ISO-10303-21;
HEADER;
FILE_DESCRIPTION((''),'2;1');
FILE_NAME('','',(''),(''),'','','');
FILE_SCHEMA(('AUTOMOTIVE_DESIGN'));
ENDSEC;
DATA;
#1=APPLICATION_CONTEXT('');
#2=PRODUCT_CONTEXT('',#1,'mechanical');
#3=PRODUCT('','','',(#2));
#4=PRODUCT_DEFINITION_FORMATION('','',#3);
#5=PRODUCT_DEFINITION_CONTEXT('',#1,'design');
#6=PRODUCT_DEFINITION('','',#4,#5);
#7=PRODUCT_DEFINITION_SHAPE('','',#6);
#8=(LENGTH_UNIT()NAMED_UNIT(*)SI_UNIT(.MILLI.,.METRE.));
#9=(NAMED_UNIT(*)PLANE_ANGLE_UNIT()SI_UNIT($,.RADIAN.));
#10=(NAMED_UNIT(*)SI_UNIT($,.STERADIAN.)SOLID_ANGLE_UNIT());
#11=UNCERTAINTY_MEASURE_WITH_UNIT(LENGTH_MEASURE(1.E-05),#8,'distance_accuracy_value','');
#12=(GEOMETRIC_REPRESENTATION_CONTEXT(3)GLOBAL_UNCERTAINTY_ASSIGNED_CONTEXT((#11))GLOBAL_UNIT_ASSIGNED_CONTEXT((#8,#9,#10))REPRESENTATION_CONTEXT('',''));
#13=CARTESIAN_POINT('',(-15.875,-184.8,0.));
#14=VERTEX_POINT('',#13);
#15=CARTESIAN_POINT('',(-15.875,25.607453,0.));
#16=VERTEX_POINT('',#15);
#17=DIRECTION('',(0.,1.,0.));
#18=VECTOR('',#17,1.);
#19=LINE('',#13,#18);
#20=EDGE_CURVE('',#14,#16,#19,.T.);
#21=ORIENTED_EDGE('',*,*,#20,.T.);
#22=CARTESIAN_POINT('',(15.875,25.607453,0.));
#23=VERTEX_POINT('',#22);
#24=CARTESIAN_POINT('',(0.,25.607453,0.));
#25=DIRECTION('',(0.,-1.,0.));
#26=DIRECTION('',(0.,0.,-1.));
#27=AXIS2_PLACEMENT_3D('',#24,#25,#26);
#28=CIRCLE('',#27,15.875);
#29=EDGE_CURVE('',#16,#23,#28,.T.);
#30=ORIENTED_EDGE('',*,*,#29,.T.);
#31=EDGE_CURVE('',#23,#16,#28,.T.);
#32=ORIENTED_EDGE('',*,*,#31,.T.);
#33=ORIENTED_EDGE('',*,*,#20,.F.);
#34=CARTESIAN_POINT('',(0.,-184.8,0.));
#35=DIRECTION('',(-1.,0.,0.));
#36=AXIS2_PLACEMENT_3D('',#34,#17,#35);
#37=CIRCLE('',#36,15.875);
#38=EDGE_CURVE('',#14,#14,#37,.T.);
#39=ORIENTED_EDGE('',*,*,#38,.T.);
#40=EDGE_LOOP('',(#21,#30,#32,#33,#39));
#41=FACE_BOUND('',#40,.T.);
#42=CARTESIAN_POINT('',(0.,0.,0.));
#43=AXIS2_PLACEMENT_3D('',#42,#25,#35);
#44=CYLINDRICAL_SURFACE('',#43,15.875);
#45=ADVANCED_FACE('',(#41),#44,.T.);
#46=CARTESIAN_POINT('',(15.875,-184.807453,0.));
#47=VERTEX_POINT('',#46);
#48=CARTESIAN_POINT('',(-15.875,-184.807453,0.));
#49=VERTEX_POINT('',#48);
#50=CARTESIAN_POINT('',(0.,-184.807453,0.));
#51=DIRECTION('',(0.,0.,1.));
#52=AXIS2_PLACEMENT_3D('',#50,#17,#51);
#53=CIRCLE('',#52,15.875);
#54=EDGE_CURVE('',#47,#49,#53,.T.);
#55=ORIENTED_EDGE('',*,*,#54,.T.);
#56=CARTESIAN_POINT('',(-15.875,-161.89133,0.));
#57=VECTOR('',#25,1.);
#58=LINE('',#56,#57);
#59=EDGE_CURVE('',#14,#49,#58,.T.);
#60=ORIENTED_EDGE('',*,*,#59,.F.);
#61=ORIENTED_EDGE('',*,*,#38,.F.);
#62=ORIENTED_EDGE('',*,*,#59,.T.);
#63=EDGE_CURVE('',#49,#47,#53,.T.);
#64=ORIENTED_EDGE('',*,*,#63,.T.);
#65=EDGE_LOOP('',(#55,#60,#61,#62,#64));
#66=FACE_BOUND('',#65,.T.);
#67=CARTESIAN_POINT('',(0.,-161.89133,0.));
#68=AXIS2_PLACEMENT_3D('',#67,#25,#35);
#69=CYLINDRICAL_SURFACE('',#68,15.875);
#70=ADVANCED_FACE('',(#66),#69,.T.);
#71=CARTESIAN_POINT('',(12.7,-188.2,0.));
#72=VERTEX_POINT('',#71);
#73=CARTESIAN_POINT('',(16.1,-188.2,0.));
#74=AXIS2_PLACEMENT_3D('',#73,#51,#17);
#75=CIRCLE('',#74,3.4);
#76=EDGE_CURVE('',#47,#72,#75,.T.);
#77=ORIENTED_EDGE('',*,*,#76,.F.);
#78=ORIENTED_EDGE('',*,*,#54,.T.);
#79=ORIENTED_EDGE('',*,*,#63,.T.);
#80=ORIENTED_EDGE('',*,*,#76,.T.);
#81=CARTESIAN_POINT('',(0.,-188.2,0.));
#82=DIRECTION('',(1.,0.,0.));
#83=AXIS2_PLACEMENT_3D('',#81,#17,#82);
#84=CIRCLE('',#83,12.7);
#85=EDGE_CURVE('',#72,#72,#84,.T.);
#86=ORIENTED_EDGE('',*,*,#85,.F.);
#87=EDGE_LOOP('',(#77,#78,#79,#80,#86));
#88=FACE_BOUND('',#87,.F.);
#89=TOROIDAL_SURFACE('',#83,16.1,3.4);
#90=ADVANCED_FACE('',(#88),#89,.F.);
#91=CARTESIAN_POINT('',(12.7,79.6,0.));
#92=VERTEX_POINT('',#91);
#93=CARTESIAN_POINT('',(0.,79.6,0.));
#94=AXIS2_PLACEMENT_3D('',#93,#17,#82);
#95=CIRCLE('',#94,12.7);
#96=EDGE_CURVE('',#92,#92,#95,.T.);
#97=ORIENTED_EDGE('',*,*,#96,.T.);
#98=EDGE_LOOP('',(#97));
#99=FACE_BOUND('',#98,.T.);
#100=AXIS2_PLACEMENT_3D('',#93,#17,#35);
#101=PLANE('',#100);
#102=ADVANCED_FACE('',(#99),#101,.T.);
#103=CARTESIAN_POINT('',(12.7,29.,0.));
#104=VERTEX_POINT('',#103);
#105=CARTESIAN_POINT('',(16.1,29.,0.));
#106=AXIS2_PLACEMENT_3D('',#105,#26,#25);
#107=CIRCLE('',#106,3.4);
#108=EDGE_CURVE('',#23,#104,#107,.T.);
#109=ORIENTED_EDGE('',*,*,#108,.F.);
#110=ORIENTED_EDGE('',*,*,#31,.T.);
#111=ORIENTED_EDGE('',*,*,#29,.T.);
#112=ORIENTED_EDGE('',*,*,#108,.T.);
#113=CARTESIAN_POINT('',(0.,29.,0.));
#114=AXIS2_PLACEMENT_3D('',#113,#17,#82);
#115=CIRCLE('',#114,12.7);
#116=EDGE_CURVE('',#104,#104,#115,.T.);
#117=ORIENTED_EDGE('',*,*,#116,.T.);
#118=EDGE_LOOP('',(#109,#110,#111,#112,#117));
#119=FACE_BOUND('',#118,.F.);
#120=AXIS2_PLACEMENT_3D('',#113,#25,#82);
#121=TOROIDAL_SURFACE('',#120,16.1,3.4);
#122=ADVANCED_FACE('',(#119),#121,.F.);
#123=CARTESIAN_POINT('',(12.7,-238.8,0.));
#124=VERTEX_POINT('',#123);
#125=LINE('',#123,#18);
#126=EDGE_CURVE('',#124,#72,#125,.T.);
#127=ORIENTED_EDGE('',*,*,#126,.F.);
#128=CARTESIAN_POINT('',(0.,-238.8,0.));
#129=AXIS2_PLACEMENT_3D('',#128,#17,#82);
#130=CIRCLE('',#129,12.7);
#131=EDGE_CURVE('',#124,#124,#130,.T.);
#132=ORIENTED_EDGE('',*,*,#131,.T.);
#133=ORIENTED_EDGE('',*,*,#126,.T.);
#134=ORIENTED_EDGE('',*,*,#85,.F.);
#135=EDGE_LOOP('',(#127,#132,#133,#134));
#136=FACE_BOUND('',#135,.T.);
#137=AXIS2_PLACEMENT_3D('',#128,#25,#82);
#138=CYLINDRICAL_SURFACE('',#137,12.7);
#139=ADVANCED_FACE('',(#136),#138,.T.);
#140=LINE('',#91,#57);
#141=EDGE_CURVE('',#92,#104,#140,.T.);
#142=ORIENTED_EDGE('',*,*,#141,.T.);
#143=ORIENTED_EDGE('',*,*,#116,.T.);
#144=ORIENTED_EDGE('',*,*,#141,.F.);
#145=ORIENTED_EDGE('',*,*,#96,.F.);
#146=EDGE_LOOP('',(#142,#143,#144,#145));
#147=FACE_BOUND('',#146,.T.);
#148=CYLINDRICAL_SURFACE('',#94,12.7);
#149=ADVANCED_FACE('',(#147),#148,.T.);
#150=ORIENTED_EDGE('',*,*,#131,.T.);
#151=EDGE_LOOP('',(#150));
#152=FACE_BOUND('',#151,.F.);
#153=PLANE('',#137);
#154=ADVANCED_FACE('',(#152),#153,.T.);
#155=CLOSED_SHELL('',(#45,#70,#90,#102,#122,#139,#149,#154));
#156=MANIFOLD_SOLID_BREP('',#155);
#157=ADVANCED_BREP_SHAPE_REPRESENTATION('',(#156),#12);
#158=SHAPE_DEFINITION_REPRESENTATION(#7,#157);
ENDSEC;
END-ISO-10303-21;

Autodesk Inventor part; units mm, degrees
ref_plane "YZ Plane" through (0, 0, 0) normal (1, 0, 0) x (0, 1, 0)
ref_plane "XZ Plane" through (0, 0, 0) normal (0, 1, 0) x (-1, 0, 0)
ref_plane "XY Plane" through (0, 0, 0) normal (0, 0, 1) x (1, 0, 0)
sketch "Sketch1" plane through (0, 0, 0) normal (0, 1, 0) x (-1, 0, 0)
  circle A0 centre (0, 0) radius 15.875
  dimension "d7" = 31.75
extrude "Extrusion1" add sketch "Sketch1" along normal mid plane 159.2
sketch "Sketch2" plane through (0, 79.6, 0) normal (0, 1, 0) x (1, 0, 0)
  circle A0 centre (0, 0) radius 12.7
  circle A1 centre (0, 0) radius 15.875 projected
  circle A2 centre (0, 0) radius 15.875
  dimension "d6" = 25.4
extrude "Extrusion2" cut sketch "Sketch2" against normal blind 54
fillet "Fillet1" radius 3.4 1 edges at (-12.7, 25.6, 0)
mirror "Mirror2" about plane through (0, -79.6, 0) normal (0, -1, 0) of "Extrusion2", "Extrusion1", "Fillet1"
thread "Thread4" size "1-14 UNS" class "2A" standard "ANSI Unified Screw Threads" length 54
thread "Thread5" size "1-14 UNS" class "2A" standard "ANSI Unified Screw Threads" length 54
properties part number "Eje Biela"
